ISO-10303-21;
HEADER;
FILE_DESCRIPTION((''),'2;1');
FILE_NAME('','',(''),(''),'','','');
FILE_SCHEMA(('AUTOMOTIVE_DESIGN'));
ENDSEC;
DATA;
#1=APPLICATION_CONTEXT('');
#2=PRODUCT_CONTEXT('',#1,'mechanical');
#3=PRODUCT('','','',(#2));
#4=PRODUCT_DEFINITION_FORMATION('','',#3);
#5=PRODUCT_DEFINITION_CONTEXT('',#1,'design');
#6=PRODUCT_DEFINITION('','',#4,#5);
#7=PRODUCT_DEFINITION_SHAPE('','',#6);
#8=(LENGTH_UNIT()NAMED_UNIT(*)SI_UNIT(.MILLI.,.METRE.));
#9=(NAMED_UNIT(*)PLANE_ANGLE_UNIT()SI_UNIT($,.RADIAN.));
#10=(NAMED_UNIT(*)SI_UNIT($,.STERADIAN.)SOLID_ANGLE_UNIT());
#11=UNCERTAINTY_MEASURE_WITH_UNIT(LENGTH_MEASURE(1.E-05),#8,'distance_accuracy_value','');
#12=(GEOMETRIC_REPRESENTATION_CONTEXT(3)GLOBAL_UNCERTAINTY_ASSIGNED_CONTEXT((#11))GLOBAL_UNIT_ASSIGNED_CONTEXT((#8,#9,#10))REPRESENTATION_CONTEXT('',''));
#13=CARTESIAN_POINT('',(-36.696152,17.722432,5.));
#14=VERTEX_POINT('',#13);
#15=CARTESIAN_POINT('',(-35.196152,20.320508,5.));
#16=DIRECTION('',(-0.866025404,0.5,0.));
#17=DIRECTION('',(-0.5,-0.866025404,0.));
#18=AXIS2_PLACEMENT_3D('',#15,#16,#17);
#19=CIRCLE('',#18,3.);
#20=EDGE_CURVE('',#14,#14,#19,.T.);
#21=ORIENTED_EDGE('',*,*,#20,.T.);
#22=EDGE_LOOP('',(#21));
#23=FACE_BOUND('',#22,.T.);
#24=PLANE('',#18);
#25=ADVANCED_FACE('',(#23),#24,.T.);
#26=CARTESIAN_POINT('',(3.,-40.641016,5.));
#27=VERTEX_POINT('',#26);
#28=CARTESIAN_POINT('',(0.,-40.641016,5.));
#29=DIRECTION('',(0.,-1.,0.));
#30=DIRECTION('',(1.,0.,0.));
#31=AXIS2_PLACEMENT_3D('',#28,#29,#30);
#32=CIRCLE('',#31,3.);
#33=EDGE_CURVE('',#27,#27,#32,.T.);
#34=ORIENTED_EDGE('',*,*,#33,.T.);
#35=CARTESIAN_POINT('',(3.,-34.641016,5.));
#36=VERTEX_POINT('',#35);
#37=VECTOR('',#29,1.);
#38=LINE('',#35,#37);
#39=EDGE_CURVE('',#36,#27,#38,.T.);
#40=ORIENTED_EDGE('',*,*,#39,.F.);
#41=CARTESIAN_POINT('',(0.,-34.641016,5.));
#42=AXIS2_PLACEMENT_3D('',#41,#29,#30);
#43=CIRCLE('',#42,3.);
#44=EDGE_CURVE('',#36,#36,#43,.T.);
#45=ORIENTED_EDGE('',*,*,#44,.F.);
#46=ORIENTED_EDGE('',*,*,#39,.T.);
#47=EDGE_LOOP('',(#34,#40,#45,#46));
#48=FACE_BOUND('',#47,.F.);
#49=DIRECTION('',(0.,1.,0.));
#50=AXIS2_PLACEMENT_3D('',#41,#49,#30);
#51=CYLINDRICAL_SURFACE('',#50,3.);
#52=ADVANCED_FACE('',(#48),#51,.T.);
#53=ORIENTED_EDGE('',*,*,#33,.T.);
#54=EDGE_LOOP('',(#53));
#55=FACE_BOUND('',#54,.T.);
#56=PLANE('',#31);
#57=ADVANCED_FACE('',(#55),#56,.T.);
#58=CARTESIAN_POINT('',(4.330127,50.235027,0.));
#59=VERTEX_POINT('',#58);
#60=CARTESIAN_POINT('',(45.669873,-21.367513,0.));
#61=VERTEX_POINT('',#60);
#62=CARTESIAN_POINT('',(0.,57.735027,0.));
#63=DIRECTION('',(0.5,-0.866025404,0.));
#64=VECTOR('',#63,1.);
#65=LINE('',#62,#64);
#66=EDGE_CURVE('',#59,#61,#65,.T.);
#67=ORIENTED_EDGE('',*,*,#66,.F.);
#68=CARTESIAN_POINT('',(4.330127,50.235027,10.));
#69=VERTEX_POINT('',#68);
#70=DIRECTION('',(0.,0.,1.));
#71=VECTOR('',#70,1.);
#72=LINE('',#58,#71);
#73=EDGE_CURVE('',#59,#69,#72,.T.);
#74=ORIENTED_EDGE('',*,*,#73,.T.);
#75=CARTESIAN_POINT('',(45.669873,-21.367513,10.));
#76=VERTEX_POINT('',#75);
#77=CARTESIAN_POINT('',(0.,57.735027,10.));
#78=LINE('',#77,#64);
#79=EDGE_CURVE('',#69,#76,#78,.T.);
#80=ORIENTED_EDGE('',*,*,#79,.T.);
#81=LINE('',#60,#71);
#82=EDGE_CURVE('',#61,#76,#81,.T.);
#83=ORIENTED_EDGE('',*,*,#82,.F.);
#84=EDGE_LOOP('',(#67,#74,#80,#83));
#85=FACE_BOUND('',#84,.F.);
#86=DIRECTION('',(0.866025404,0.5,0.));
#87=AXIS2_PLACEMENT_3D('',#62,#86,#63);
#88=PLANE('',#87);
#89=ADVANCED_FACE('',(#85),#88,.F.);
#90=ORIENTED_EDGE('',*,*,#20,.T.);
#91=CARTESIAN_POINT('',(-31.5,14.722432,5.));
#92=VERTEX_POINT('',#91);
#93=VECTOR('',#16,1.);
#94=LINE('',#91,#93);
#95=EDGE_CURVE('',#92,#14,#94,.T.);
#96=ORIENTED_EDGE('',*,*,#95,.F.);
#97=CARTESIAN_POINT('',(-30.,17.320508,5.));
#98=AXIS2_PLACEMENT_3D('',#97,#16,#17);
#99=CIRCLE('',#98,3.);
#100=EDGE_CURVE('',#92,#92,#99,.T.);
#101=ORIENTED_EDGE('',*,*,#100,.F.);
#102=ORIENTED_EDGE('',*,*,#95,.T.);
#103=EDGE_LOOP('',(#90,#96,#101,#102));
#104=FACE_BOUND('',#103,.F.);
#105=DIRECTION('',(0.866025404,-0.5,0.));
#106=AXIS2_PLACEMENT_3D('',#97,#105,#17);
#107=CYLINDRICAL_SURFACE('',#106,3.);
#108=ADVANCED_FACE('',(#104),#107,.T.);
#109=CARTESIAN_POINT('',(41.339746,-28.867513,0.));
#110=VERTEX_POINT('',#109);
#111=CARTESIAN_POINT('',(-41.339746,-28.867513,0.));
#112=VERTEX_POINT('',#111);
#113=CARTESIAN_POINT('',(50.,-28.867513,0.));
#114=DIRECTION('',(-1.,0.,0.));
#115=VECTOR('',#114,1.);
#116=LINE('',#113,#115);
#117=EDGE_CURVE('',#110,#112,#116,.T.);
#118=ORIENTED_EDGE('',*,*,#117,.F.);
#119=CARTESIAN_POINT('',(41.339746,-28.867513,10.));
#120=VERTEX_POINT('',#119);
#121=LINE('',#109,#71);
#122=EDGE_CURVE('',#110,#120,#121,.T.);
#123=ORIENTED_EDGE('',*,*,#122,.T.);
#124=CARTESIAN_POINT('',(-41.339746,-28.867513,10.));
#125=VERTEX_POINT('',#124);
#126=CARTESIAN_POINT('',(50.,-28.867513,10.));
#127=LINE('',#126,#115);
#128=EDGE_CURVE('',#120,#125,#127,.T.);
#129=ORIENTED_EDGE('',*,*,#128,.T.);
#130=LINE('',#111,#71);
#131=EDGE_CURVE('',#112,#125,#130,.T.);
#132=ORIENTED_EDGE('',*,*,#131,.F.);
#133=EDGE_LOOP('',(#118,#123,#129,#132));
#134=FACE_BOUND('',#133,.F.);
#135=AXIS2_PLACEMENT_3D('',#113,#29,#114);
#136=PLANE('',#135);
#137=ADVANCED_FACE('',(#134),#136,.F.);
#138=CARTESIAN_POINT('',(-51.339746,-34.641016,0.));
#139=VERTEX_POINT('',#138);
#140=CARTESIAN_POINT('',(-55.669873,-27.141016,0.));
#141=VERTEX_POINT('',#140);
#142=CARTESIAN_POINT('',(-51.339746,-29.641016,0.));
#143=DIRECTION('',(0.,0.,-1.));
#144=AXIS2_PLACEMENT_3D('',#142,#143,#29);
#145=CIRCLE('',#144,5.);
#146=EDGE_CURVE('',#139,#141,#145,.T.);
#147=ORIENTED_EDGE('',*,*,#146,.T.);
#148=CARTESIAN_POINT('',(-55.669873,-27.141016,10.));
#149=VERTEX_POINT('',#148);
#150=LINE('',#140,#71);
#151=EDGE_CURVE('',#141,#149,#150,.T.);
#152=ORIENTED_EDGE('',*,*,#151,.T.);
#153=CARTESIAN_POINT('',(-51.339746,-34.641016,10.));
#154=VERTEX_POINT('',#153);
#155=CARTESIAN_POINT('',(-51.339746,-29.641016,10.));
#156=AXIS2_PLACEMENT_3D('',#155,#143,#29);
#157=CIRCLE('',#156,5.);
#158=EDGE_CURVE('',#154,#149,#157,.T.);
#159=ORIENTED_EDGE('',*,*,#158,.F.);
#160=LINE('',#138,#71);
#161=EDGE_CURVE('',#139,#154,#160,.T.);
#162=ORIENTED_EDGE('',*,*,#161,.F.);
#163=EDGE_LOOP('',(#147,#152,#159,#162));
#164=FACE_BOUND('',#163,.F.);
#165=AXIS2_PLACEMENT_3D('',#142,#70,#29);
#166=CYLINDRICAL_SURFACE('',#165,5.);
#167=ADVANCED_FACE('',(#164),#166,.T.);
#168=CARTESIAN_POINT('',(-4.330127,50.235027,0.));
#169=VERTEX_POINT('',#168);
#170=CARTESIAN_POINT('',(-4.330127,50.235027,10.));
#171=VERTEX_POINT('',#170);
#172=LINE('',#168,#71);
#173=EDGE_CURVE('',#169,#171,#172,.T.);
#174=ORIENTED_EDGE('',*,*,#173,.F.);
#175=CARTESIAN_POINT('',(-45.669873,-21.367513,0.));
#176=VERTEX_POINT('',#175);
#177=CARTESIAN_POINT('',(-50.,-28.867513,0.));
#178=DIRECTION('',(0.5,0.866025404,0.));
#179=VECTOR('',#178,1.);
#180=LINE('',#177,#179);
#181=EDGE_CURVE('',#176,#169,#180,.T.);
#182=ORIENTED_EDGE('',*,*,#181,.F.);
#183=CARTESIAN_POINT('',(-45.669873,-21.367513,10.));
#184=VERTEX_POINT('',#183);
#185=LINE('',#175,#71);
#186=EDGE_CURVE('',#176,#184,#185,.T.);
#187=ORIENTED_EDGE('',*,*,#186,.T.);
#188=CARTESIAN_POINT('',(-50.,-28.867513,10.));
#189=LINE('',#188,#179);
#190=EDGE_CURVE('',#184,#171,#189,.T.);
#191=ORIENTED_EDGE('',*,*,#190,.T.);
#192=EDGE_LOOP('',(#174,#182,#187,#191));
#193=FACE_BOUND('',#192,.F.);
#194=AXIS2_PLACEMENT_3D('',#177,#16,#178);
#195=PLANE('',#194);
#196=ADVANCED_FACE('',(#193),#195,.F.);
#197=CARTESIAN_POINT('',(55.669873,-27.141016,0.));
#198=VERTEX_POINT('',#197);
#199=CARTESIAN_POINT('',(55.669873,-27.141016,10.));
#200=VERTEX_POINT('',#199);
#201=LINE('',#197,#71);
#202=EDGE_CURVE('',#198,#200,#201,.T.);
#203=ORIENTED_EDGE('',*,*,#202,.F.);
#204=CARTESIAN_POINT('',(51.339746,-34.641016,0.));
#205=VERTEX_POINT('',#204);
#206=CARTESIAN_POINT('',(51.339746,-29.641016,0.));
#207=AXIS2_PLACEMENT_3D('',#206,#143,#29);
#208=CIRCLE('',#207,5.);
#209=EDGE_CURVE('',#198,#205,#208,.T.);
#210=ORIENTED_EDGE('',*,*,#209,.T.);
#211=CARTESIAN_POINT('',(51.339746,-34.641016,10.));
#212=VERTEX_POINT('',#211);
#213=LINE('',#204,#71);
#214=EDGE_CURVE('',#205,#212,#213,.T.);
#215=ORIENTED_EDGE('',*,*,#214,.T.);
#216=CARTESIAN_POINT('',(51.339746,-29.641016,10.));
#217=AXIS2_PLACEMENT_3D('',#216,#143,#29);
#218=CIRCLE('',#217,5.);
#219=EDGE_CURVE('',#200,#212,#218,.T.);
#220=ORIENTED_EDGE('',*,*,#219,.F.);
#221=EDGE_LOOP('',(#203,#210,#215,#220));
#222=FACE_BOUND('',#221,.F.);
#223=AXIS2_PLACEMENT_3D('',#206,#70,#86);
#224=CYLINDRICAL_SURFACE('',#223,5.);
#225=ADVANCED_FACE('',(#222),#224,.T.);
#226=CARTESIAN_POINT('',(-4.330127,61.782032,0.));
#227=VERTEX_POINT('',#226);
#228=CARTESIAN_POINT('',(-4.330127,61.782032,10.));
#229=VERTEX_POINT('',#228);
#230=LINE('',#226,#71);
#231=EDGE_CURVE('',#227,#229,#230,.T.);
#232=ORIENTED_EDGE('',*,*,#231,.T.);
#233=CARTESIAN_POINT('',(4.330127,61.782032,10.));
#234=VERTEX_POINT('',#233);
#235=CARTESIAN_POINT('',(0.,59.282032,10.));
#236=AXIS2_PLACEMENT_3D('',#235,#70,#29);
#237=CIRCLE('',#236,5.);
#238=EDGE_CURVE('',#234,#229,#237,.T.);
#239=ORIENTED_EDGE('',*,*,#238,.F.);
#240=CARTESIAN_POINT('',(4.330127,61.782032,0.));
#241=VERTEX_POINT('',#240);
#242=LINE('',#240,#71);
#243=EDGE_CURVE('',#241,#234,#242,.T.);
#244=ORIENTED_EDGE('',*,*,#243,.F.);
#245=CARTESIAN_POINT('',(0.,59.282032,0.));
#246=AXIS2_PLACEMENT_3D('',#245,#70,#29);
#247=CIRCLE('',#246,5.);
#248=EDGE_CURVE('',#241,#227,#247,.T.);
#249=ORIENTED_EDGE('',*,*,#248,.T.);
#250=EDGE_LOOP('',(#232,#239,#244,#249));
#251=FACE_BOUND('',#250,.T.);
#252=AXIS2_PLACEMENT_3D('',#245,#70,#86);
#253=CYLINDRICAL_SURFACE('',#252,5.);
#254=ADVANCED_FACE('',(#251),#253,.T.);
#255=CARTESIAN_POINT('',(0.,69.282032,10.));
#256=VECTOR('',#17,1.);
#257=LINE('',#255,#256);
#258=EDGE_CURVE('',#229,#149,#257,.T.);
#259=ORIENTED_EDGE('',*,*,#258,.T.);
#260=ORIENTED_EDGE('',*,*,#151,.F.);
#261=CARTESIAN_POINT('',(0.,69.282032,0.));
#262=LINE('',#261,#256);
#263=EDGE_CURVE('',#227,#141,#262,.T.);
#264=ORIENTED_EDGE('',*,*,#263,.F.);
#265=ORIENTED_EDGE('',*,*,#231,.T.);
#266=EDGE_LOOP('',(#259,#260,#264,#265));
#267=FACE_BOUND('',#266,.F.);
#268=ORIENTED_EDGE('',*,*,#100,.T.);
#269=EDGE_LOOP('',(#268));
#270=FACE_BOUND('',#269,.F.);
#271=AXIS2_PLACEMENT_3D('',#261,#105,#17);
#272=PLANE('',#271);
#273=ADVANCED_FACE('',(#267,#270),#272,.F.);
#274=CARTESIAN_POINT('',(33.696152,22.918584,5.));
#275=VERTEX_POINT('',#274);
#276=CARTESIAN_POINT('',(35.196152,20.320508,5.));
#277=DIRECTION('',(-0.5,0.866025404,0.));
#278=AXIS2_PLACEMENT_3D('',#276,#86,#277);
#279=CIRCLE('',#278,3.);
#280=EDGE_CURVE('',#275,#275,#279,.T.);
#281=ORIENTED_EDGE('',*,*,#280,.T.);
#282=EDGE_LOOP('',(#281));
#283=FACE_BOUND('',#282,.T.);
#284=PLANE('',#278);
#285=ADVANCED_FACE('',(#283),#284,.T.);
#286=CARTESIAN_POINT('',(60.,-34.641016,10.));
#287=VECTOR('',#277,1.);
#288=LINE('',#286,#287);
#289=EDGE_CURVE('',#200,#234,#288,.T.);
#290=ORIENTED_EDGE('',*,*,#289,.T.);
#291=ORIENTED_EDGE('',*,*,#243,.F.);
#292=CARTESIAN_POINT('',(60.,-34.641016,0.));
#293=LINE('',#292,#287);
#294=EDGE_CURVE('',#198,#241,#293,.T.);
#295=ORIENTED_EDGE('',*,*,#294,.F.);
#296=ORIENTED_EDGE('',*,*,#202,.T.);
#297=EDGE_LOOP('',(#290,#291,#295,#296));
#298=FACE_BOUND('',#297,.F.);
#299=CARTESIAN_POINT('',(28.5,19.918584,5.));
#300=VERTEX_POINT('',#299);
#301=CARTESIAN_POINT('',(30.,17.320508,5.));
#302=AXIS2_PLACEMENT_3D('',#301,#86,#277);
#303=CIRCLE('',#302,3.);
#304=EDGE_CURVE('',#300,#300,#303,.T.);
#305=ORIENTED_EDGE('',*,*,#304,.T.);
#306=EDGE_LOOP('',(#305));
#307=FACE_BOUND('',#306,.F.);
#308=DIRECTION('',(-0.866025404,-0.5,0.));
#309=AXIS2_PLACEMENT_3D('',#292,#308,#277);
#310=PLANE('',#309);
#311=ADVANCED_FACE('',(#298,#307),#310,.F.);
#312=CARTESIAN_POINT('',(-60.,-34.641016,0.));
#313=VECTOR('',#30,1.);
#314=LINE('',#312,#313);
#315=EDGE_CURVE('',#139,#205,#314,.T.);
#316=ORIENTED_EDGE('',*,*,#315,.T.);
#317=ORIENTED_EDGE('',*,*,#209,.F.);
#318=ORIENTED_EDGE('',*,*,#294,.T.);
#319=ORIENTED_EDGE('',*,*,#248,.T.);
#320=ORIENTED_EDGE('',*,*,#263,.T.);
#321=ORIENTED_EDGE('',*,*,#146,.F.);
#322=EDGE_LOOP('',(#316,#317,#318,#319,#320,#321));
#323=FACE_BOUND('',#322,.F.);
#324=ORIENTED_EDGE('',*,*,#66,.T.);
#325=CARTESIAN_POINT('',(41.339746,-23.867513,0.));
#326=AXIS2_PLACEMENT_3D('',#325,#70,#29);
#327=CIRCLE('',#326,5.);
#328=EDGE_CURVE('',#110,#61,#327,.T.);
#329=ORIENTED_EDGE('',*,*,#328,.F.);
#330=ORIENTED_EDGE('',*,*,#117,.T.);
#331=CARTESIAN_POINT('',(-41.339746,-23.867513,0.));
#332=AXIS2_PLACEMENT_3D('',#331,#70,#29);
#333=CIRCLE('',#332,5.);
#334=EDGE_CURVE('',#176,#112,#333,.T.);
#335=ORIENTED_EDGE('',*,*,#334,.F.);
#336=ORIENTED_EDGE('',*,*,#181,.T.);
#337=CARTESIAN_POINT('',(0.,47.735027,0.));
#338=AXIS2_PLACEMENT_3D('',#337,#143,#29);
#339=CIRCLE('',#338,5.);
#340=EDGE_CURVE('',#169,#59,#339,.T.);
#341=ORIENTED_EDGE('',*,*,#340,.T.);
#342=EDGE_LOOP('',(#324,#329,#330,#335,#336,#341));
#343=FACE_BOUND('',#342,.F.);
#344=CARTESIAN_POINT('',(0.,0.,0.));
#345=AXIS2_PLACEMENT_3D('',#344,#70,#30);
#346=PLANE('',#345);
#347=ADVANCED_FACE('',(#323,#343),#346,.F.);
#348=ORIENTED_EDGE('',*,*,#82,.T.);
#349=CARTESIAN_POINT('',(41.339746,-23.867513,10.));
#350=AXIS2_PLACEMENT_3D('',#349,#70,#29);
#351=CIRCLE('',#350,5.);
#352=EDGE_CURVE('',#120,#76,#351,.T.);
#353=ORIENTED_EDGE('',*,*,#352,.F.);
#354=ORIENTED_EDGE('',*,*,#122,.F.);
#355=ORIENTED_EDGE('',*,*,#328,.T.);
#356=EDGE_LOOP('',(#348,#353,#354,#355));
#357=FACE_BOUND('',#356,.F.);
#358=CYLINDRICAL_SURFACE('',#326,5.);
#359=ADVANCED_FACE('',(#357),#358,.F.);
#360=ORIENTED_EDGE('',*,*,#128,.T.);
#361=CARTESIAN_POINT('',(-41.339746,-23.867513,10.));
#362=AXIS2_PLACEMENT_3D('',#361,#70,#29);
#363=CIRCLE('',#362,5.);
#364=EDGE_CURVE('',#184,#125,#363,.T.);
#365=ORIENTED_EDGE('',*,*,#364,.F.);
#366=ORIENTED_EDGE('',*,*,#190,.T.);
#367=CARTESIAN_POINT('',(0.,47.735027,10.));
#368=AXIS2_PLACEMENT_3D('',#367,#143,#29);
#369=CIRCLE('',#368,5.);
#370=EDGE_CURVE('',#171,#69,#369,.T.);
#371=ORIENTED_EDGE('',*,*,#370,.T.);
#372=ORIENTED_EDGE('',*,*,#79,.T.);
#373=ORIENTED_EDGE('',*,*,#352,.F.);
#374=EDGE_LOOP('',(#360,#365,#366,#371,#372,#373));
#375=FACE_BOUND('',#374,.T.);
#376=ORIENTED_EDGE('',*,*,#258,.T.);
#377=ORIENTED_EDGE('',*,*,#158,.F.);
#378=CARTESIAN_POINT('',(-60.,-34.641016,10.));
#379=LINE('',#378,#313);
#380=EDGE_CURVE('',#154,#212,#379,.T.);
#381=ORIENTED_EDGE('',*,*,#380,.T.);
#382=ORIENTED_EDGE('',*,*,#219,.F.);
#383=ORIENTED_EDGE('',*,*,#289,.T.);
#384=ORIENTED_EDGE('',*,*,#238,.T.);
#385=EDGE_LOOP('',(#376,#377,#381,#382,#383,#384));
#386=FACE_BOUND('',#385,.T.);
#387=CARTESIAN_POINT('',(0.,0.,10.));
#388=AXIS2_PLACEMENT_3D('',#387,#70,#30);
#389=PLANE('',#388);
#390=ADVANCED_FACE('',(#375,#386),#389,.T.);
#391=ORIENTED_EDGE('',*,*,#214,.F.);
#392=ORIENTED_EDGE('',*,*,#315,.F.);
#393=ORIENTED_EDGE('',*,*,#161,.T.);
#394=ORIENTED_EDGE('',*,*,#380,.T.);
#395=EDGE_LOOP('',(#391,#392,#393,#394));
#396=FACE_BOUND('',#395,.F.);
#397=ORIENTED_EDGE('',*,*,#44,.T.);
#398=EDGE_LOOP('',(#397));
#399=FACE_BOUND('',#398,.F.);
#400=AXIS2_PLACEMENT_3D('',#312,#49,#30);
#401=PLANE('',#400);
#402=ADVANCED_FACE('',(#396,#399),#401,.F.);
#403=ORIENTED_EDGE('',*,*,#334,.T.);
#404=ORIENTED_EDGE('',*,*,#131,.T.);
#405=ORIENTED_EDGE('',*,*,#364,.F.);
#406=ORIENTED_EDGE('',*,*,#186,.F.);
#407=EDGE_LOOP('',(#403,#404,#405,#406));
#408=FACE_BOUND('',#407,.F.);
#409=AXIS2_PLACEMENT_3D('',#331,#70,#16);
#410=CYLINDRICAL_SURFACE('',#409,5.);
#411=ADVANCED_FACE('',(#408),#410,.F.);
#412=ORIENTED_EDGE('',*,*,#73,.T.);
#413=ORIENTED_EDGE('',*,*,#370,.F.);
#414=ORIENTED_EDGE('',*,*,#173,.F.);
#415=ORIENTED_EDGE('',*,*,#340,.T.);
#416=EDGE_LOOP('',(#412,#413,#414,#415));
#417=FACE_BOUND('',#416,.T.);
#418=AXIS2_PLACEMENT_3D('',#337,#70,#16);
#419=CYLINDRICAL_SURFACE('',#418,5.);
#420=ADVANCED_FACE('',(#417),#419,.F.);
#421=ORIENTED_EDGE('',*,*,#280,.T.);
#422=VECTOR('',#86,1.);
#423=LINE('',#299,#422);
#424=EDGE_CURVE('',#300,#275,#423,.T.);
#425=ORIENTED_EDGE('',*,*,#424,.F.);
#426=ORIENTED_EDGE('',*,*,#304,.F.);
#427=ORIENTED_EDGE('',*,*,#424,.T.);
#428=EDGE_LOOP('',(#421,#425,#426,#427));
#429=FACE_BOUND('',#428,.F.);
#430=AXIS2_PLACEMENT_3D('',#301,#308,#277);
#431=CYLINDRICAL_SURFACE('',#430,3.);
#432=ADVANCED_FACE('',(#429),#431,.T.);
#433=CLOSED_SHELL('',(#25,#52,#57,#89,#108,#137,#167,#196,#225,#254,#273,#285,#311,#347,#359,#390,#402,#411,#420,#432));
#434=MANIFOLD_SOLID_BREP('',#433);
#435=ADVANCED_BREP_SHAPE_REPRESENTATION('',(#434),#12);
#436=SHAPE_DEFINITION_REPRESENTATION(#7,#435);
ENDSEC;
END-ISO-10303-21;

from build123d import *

# Parameters (mm, degrees)
F1_DEPTH        = 10
F2_R            = 5
F3_R            = 3
F4_DEPTH        = 6
F4_COPIES_COUNT = 3


# Not quite as in the source:
# - a pattern or mirror of a feature is missing from the dataset's text; its kind, count and spacing are read off the source's solid


with BuildPart() as f1:
    # F0 (on Top) → F1 (new body)
    with BuildSketch(Plane.XY):
        Polygon((60, -34.6410161514), (0, 69.2820323028), (-60, -34.6410161514), align=None)
        Polygon((0, 57.735026919), (50, -28.8675134595), (-50, -28.8675134595), align=None, mode=Mode.SUBTRACT)
    extrude(amount=F1_DEPTH)

    # F2
    f2_edges = [f1.edges().sort_by_distance(p)[0] for p in [
        (-60, -34.641016, 5),
        (60, -34.641016, 5),
        (0, 69.282032, 5),
        (50, -28.867513, 5),
        (0, 57.735027, 5),
        (-50, -28.867513, 5),
    ]]
    fillet(f2_edges, radius=F2_R)

    # F3 (on face) → F4 (join)
    with BuildSketch(Plane.XZ.offset(34.6410161514)):
        with Locations((0, 5)):
            Circle(F3_R)
    f4 = extrude(amount=F4_DEPTH)

    # F4_copies: F4 ×3 about axis
    f4_copies_axis = Axis((0, 0, 0), (0, 0, 1))
    for i in range(1, F4_COPIES_COUNT):
        add(f4.rotate(f4_copies_axis, i * 360 / F4_COPIES_COUNT))


solid = f1.part
